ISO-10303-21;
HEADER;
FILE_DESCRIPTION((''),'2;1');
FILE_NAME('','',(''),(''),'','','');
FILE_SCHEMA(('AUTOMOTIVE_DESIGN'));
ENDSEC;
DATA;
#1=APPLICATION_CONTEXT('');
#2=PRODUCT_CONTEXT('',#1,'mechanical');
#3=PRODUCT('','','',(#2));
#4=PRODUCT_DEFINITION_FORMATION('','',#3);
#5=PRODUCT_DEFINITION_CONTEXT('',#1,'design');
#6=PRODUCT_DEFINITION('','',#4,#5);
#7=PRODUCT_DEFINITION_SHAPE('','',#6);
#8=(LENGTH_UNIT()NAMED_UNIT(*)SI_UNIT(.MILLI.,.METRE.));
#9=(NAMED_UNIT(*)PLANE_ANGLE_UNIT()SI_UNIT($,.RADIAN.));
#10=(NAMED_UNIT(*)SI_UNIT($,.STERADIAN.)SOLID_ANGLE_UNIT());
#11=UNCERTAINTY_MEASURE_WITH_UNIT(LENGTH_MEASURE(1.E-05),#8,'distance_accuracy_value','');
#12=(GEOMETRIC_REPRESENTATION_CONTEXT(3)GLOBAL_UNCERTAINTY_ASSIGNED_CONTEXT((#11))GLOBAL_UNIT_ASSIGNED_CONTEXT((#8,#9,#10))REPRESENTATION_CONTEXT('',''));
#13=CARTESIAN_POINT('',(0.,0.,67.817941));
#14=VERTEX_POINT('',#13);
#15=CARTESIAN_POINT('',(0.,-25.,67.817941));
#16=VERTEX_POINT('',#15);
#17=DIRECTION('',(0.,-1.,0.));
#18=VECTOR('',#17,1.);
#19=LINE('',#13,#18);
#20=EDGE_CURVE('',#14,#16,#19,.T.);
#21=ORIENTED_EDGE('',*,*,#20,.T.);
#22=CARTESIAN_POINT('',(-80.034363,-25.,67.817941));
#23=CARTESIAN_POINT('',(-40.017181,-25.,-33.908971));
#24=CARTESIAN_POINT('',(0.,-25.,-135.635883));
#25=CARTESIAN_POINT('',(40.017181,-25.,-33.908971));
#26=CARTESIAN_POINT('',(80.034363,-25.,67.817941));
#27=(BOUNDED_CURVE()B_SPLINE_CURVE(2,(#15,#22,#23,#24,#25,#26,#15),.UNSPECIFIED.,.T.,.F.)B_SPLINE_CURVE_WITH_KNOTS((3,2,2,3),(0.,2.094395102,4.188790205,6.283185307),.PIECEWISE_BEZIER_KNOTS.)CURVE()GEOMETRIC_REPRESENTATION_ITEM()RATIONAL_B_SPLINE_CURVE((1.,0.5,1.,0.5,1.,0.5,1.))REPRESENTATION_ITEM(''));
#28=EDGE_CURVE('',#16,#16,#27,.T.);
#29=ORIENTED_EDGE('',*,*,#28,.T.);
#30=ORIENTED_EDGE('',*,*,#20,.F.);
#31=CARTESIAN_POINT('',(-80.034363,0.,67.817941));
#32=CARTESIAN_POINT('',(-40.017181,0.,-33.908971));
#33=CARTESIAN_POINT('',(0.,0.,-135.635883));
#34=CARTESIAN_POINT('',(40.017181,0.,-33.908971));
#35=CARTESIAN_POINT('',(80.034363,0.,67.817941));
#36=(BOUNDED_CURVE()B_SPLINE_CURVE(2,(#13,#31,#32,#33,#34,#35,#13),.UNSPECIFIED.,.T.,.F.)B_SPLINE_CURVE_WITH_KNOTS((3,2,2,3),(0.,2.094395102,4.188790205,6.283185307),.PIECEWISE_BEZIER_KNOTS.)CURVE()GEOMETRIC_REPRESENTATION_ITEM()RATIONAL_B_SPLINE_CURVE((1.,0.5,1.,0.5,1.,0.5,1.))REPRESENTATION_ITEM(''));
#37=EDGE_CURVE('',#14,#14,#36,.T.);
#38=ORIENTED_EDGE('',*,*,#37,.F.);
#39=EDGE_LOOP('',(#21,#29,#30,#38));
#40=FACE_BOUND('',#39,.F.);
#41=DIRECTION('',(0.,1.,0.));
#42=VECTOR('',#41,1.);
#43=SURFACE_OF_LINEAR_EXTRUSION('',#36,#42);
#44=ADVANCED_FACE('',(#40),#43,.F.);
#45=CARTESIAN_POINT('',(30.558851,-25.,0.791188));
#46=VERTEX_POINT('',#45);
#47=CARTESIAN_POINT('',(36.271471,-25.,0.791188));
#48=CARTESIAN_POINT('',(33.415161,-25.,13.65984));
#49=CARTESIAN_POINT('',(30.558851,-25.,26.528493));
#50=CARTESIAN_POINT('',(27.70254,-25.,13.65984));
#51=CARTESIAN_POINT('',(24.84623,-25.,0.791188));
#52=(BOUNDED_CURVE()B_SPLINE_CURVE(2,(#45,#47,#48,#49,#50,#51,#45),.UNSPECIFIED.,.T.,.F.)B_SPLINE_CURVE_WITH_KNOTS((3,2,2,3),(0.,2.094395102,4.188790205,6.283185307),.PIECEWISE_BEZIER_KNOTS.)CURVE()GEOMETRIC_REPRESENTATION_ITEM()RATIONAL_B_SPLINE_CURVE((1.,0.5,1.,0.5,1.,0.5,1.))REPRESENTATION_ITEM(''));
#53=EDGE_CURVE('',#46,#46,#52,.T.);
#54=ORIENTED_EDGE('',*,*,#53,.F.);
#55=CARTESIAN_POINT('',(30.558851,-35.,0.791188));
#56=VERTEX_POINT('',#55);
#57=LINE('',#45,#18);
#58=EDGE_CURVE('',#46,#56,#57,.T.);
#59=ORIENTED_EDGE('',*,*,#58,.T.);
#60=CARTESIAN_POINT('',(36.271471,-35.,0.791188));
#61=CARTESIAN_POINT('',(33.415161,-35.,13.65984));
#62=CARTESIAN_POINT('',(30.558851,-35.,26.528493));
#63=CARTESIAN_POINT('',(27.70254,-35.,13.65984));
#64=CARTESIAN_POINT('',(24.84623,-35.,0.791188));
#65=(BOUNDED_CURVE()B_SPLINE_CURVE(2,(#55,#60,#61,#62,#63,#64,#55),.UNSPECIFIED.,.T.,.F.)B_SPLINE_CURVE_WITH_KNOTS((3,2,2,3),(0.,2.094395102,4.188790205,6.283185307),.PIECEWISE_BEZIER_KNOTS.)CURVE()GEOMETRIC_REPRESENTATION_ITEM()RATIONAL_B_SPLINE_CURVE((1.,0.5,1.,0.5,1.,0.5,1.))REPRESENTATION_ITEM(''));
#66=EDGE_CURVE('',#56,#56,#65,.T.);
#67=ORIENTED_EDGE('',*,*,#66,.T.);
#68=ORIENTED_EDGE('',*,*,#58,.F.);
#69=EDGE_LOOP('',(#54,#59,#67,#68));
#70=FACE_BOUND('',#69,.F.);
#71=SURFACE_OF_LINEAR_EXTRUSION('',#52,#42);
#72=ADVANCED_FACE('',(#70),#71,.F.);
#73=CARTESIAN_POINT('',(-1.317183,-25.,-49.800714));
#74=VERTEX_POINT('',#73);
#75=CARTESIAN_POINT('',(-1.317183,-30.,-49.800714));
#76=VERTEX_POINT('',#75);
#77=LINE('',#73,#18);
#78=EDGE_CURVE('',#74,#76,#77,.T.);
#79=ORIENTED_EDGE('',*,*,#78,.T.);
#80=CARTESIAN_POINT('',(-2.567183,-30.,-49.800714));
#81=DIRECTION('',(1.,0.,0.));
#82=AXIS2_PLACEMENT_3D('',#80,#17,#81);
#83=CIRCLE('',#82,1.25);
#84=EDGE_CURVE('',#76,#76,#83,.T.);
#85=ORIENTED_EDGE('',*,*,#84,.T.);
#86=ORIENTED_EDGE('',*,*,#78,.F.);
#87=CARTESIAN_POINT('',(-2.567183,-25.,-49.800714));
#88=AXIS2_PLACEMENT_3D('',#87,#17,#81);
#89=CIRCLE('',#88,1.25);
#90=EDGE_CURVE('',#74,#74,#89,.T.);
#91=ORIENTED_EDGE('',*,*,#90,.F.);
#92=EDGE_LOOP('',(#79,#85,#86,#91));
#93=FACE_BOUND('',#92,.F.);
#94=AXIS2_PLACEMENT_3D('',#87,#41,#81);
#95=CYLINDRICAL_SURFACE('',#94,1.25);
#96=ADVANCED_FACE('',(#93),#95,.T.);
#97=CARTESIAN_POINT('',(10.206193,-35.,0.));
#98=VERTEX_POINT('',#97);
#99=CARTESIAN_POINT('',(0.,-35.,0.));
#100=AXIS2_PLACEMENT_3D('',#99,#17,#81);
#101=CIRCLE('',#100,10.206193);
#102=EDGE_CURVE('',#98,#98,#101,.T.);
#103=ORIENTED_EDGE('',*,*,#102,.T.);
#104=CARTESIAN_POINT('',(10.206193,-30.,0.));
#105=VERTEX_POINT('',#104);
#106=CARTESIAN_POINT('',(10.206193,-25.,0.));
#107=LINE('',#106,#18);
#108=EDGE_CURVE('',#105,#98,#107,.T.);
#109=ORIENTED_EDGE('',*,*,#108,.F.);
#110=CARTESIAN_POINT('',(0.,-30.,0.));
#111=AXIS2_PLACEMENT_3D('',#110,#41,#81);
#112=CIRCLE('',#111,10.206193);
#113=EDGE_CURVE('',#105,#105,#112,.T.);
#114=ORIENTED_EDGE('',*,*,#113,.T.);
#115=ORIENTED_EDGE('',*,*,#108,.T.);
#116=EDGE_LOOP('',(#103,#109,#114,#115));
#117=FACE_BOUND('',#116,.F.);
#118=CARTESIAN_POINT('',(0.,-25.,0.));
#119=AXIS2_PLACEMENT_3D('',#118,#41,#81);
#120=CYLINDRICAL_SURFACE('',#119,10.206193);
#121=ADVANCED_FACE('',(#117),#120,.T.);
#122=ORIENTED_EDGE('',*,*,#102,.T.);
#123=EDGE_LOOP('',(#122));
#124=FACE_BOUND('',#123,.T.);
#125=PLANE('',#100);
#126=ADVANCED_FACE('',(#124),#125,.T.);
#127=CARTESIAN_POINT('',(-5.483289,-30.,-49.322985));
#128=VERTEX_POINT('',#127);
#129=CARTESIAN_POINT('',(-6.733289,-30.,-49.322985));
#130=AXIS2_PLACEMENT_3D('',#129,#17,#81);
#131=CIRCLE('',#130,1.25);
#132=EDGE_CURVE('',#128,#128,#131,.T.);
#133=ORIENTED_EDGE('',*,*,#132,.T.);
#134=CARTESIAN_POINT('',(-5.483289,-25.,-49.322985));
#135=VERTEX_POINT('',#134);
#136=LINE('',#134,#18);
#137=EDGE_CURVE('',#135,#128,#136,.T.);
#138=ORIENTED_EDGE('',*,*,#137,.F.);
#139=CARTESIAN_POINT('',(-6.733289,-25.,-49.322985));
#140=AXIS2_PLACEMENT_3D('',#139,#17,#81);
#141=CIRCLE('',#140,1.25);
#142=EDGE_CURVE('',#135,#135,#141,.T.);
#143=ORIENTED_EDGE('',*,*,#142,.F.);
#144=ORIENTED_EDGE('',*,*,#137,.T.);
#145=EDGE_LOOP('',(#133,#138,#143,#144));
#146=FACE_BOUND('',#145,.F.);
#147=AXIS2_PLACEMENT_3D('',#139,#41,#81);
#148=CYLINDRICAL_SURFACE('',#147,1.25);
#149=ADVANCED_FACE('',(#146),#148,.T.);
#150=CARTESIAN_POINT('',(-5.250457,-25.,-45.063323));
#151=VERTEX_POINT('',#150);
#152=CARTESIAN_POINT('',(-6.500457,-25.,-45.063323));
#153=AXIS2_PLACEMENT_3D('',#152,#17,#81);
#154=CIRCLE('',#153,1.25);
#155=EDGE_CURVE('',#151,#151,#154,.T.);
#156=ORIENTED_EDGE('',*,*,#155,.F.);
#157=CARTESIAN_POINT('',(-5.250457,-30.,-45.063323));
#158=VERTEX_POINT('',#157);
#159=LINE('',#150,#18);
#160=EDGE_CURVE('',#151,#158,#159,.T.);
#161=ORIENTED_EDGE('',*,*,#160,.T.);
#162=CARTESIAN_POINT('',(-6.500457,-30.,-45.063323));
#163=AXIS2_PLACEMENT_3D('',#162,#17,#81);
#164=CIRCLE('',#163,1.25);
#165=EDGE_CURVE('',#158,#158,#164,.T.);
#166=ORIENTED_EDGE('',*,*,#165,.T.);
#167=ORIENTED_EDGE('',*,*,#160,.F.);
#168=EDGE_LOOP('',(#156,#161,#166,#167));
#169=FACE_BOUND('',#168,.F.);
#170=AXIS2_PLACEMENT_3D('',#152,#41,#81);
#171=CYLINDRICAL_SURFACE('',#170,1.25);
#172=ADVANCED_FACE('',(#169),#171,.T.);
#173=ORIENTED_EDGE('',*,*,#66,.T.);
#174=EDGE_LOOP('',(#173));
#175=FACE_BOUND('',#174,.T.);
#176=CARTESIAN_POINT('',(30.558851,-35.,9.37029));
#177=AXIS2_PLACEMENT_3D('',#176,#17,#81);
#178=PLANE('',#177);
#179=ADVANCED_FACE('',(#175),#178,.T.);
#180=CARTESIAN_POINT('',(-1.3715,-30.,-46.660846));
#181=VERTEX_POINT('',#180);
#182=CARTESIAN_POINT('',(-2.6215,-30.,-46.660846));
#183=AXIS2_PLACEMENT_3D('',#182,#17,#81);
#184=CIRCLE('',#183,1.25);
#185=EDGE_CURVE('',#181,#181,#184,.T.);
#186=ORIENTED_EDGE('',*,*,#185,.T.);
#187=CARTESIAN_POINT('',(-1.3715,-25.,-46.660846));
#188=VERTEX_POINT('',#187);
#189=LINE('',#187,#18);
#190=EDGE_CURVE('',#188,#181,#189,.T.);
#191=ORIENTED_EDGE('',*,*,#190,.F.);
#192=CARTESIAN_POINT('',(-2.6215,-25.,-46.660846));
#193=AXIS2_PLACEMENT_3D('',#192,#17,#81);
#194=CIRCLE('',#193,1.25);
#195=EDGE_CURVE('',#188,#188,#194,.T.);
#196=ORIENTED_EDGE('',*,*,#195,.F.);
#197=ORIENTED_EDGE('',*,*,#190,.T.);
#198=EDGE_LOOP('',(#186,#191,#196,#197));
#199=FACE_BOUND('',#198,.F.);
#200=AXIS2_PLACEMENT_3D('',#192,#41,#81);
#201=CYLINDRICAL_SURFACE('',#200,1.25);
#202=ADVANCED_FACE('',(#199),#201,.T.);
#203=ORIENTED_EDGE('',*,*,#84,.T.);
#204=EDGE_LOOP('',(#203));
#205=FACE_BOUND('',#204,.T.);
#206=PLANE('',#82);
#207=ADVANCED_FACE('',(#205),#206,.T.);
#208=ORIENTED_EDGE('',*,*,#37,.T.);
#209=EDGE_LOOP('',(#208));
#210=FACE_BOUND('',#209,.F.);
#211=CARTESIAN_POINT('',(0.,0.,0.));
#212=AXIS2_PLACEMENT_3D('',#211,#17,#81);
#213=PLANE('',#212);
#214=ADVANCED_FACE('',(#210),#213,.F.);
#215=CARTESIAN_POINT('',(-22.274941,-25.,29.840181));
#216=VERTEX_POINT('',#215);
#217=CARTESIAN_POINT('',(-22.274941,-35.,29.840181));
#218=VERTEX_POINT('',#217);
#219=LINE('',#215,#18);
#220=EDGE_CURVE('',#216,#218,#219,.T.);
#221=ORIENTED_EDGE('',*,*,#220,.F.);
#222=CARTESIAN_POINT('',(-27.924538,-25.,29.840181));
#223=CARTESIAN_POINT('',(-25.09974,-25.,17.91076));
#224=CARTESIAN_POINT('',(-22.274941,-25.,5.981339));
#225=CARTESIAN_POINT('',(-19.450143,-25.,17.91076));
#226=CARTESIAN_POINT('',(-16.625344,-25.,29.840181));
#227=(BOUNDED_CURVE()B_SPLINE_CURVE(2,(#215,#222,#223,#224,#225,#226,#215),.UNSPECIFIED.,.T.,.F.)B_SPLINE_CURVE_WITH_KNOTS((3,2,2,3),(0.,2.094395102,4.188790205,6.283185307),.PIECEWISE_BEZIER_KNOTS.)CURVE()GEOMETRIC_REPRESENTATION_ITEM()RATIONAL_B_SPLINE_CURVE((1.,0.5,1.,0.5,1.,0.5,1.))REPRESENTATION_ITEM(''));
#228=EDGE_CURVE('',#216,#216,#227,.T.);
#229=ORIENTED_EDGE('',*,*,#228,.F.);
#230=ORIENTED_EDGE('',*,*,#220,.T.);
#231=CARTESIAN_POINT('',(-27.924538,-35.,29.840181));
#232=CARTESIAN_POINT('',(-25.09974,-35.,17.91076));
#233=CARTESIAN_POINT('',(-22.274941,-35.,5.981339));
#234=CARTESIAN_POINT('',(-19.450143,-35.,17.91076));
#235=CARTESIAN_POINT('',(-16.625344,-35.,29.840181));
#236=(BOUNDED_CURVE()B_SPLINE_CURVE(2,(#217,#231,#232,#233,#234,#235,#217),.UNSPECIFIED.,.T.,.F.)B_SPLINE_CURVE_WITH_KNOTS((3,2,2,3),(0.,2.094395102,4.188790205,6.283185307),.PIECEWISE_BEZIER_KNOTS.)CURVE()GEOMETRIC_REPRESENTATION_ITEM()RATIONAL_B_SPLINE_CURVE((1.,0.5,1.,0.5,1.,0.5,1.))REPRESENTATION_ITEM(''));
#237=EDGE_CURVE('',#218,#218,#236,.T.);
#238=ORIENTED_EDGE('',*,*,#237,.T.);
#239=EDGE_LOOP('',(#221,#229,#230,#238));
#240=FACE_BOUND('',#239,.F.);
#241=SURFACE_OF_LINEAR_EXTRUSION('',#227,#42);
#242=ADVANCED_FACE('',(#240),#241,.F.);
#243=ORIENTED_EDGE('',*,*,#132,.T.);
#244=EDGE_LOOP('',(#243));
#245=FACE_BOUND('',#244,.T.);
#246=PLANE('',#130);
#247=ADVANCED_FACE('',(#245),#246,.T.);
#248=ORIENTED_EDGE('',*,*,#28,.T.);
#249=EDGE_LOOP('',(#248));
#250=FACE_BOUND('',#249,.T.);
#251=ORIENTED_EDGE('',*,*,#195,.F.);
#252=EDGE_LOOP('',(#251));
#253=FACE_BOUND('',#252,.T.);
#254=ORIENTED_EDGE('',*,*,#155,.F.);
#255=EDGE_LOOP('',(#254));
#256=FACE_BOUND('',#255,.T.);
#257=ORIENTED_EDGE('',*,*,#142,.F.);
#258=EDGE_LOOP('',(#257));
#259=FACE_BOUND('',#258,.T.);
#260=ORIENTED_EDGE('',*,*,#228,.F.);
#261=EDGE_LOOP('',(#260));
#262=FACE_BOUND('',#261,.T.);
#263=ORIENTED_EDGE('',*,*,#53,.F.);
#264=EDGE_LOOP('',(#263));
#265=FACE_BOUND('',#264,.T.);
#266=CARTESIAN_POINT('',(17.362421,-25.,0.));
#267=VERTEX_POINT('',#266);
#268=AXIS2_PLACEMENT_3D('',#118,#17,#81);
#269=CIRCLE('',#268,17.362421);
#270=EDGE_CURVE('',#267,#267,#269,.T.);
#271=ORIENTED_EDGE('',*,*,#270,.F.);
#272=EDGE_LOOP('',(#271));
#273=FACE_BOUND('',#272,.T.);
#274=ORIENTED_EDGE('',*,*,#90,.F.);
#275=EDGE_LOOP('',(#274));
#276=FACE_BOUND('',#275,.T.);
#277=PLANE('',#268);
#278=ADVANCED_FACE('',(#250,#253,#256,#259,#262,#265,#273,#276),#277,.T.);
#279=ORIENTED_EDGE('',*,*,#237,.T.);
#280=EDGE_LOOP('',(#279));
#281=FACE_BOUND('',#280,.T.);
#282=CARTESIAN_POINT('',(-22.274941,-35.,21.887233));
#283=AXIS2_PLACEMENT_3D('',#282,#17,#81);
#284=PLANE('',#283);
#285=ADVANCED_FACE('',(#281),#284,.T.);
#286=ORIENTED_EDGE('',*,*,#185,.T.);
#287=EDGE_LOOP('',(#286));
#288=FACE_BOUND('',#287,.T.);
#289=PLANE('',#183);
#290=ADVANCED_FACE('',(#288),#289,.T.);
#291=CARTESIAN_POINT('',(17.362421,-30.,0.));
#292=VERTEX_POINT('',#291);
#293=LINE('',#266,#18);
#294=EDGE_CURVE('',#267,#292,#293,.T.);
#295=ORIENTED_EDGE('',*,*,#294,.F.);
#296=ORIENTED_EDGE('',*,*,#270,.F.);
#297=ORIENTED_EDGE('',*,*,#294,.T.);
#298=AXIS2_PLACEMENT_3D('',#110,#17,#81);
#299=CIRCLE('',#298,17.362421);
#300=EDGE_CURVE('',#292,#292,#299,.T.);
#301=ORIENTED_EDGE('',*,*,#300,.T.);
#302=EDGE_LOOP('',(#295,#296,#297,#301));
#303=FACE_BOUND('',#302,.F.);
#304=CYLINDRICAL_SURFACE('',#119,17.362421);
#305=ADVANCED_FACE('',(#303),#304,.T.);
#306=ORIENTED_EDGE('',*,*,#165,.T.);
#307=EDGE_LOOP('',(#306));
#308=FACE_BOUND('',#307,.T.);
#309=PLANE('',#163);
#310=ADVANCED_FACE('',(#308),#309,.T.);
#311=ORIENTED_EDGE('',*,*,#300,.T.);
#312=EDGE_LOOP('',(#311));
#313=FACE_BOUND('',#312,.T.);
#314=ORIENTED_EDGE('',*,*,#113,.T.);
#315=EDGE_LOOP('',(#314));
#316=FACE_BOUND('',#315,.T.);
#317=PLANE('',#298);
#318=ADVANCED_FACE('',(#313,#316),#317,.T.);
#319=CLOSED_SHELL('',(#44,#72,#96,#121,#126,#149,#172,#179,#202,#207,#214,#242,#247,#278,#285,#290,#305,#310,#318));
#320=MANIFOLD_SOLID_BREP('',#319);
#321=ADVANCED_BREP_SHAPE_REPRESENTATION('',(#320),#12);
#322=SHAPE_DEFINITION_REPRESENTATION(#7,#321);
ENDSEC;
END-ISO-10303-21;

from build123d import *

# Parameters (mm, degrees)
F1_DEPTH  = 25
F3_DEPTH  = 10
F4_R      = 10.2061926116
F5_DEPTH  = 10
F6_R      = 17.3624209795
F7_DEPTH  = 5
F25_R     = 1.25
F26_DEPTH = 5
F28_DEPTH = 10


# Not quite as in the source:
# - the program builds the solid bodies; features that only make, move or delete a surface that nothing else refers to are left out


with BuildPart() as f1:
    # F0 (on Front) → F1 (new body)
    with BuildSketch(Plane.XZ):
        with BuildLine():
            add(Edge.make_bspline(
                [(0, 67.817941308), (-80.0343626638, 67.817941308), (-40.0171813319, -33.908970654), (0, -135.635882616), (40.0171813319, -33.908970654), (80.0343626638, 67.817941308), (0, 67.817941308)],
                knots=[0, 0, 0, 2.0943951024, 2.0943951024, 4.1887902048, 4.1887902048, 6.2831853072, 6.2831853072, 6.2831853072], degree=2, weights=[1, 0.5, 1, 0.5, 1, 0.5, 1]))
        make_face()
    extrude(amount=F1_DEPTH)

    # F2 (on face) → F3 (join)
    with BuildSketch(Plane.XZ.offset(25)):
        with BuildLine():
            add(Edge.make_bspline(
                [(-22.274941206, 29.8401806504), (-27.9245384405, 29.8401806504), (-25.0997398233, 17.910759896), (-22.274941206, 5.9813391417), (-19.4501425887, 17.910759896), (-16.6253439714, 29.8401806504), (-22.274941206, 29.8401806504)],
                knots=[0, 0, 0, 2.0943951024, 2.0943951024, 4.1887902048, 4.1887902048, 6.2831853072, 6.2831853072, 6.2831853072], degree=2, weights=[1, 0.5, 1, 0.5, 1, 0.5, 1]))
        make_face()
    extrude(amount=F3_DEPTH)

    # F4 (on face) → F5 (join)
    with BuildSketch(Plane.XZ.offset(25)):
        Circle(F4_R)
    extrude(amount=F5_DEPTH)

    # F6 (on face) → F7 (join)
    with BuildSketch(Plane.XZ.offset(25)):
        Circle(F6_R)
    extrude(amount=F7_DEPTH)

    # F25 (on face) → F26 (join)
    with BuildSketch(Plane.XZ.offset(25)):
        with Locations((-6.5004567707, -45.0633225443)):
            Circle(F25_R)
        with Locations((-2.6214996293, -46.6608458069)):
            Circle(F25_R)
        with Locations((-6.7332892665, -49.3229854894)):
            Circle(F25_R)
        with Locations((-2.5671826191, -49.8007137575)):
            Circle(F25_R)
    extrude(amount=F26_DEPTH)

    # F27 (on face) → F28 (join)
    with BuildSketch(Plane.XZ.offset(25)):
        with BuildLine():
            add(Edge.make_bspline(
                [(30.5588506162, 0.7911883295), (36.2714713272, 0.7911883295), (33.4151609717, 13.6598404497), (30.5588506162, 26.5284925699), (27.7025402607, 13.6598404497), (24.8462299052, 0.7911883295), (30.5588506162, 0.7911883295)],
                knots=[0, 0, 0, 2.0943951024, 2.0943951024, 4.1887902048, 4.1887902048, 6.2831853072, 6.2831853072, 6.2831853072], degree=2, weights=[1, 0.5, 1, 0.5, 1, 0.5, 1]))
        make_face()
    extrude(amount=F28_DEPTH)


solid = f1.part
